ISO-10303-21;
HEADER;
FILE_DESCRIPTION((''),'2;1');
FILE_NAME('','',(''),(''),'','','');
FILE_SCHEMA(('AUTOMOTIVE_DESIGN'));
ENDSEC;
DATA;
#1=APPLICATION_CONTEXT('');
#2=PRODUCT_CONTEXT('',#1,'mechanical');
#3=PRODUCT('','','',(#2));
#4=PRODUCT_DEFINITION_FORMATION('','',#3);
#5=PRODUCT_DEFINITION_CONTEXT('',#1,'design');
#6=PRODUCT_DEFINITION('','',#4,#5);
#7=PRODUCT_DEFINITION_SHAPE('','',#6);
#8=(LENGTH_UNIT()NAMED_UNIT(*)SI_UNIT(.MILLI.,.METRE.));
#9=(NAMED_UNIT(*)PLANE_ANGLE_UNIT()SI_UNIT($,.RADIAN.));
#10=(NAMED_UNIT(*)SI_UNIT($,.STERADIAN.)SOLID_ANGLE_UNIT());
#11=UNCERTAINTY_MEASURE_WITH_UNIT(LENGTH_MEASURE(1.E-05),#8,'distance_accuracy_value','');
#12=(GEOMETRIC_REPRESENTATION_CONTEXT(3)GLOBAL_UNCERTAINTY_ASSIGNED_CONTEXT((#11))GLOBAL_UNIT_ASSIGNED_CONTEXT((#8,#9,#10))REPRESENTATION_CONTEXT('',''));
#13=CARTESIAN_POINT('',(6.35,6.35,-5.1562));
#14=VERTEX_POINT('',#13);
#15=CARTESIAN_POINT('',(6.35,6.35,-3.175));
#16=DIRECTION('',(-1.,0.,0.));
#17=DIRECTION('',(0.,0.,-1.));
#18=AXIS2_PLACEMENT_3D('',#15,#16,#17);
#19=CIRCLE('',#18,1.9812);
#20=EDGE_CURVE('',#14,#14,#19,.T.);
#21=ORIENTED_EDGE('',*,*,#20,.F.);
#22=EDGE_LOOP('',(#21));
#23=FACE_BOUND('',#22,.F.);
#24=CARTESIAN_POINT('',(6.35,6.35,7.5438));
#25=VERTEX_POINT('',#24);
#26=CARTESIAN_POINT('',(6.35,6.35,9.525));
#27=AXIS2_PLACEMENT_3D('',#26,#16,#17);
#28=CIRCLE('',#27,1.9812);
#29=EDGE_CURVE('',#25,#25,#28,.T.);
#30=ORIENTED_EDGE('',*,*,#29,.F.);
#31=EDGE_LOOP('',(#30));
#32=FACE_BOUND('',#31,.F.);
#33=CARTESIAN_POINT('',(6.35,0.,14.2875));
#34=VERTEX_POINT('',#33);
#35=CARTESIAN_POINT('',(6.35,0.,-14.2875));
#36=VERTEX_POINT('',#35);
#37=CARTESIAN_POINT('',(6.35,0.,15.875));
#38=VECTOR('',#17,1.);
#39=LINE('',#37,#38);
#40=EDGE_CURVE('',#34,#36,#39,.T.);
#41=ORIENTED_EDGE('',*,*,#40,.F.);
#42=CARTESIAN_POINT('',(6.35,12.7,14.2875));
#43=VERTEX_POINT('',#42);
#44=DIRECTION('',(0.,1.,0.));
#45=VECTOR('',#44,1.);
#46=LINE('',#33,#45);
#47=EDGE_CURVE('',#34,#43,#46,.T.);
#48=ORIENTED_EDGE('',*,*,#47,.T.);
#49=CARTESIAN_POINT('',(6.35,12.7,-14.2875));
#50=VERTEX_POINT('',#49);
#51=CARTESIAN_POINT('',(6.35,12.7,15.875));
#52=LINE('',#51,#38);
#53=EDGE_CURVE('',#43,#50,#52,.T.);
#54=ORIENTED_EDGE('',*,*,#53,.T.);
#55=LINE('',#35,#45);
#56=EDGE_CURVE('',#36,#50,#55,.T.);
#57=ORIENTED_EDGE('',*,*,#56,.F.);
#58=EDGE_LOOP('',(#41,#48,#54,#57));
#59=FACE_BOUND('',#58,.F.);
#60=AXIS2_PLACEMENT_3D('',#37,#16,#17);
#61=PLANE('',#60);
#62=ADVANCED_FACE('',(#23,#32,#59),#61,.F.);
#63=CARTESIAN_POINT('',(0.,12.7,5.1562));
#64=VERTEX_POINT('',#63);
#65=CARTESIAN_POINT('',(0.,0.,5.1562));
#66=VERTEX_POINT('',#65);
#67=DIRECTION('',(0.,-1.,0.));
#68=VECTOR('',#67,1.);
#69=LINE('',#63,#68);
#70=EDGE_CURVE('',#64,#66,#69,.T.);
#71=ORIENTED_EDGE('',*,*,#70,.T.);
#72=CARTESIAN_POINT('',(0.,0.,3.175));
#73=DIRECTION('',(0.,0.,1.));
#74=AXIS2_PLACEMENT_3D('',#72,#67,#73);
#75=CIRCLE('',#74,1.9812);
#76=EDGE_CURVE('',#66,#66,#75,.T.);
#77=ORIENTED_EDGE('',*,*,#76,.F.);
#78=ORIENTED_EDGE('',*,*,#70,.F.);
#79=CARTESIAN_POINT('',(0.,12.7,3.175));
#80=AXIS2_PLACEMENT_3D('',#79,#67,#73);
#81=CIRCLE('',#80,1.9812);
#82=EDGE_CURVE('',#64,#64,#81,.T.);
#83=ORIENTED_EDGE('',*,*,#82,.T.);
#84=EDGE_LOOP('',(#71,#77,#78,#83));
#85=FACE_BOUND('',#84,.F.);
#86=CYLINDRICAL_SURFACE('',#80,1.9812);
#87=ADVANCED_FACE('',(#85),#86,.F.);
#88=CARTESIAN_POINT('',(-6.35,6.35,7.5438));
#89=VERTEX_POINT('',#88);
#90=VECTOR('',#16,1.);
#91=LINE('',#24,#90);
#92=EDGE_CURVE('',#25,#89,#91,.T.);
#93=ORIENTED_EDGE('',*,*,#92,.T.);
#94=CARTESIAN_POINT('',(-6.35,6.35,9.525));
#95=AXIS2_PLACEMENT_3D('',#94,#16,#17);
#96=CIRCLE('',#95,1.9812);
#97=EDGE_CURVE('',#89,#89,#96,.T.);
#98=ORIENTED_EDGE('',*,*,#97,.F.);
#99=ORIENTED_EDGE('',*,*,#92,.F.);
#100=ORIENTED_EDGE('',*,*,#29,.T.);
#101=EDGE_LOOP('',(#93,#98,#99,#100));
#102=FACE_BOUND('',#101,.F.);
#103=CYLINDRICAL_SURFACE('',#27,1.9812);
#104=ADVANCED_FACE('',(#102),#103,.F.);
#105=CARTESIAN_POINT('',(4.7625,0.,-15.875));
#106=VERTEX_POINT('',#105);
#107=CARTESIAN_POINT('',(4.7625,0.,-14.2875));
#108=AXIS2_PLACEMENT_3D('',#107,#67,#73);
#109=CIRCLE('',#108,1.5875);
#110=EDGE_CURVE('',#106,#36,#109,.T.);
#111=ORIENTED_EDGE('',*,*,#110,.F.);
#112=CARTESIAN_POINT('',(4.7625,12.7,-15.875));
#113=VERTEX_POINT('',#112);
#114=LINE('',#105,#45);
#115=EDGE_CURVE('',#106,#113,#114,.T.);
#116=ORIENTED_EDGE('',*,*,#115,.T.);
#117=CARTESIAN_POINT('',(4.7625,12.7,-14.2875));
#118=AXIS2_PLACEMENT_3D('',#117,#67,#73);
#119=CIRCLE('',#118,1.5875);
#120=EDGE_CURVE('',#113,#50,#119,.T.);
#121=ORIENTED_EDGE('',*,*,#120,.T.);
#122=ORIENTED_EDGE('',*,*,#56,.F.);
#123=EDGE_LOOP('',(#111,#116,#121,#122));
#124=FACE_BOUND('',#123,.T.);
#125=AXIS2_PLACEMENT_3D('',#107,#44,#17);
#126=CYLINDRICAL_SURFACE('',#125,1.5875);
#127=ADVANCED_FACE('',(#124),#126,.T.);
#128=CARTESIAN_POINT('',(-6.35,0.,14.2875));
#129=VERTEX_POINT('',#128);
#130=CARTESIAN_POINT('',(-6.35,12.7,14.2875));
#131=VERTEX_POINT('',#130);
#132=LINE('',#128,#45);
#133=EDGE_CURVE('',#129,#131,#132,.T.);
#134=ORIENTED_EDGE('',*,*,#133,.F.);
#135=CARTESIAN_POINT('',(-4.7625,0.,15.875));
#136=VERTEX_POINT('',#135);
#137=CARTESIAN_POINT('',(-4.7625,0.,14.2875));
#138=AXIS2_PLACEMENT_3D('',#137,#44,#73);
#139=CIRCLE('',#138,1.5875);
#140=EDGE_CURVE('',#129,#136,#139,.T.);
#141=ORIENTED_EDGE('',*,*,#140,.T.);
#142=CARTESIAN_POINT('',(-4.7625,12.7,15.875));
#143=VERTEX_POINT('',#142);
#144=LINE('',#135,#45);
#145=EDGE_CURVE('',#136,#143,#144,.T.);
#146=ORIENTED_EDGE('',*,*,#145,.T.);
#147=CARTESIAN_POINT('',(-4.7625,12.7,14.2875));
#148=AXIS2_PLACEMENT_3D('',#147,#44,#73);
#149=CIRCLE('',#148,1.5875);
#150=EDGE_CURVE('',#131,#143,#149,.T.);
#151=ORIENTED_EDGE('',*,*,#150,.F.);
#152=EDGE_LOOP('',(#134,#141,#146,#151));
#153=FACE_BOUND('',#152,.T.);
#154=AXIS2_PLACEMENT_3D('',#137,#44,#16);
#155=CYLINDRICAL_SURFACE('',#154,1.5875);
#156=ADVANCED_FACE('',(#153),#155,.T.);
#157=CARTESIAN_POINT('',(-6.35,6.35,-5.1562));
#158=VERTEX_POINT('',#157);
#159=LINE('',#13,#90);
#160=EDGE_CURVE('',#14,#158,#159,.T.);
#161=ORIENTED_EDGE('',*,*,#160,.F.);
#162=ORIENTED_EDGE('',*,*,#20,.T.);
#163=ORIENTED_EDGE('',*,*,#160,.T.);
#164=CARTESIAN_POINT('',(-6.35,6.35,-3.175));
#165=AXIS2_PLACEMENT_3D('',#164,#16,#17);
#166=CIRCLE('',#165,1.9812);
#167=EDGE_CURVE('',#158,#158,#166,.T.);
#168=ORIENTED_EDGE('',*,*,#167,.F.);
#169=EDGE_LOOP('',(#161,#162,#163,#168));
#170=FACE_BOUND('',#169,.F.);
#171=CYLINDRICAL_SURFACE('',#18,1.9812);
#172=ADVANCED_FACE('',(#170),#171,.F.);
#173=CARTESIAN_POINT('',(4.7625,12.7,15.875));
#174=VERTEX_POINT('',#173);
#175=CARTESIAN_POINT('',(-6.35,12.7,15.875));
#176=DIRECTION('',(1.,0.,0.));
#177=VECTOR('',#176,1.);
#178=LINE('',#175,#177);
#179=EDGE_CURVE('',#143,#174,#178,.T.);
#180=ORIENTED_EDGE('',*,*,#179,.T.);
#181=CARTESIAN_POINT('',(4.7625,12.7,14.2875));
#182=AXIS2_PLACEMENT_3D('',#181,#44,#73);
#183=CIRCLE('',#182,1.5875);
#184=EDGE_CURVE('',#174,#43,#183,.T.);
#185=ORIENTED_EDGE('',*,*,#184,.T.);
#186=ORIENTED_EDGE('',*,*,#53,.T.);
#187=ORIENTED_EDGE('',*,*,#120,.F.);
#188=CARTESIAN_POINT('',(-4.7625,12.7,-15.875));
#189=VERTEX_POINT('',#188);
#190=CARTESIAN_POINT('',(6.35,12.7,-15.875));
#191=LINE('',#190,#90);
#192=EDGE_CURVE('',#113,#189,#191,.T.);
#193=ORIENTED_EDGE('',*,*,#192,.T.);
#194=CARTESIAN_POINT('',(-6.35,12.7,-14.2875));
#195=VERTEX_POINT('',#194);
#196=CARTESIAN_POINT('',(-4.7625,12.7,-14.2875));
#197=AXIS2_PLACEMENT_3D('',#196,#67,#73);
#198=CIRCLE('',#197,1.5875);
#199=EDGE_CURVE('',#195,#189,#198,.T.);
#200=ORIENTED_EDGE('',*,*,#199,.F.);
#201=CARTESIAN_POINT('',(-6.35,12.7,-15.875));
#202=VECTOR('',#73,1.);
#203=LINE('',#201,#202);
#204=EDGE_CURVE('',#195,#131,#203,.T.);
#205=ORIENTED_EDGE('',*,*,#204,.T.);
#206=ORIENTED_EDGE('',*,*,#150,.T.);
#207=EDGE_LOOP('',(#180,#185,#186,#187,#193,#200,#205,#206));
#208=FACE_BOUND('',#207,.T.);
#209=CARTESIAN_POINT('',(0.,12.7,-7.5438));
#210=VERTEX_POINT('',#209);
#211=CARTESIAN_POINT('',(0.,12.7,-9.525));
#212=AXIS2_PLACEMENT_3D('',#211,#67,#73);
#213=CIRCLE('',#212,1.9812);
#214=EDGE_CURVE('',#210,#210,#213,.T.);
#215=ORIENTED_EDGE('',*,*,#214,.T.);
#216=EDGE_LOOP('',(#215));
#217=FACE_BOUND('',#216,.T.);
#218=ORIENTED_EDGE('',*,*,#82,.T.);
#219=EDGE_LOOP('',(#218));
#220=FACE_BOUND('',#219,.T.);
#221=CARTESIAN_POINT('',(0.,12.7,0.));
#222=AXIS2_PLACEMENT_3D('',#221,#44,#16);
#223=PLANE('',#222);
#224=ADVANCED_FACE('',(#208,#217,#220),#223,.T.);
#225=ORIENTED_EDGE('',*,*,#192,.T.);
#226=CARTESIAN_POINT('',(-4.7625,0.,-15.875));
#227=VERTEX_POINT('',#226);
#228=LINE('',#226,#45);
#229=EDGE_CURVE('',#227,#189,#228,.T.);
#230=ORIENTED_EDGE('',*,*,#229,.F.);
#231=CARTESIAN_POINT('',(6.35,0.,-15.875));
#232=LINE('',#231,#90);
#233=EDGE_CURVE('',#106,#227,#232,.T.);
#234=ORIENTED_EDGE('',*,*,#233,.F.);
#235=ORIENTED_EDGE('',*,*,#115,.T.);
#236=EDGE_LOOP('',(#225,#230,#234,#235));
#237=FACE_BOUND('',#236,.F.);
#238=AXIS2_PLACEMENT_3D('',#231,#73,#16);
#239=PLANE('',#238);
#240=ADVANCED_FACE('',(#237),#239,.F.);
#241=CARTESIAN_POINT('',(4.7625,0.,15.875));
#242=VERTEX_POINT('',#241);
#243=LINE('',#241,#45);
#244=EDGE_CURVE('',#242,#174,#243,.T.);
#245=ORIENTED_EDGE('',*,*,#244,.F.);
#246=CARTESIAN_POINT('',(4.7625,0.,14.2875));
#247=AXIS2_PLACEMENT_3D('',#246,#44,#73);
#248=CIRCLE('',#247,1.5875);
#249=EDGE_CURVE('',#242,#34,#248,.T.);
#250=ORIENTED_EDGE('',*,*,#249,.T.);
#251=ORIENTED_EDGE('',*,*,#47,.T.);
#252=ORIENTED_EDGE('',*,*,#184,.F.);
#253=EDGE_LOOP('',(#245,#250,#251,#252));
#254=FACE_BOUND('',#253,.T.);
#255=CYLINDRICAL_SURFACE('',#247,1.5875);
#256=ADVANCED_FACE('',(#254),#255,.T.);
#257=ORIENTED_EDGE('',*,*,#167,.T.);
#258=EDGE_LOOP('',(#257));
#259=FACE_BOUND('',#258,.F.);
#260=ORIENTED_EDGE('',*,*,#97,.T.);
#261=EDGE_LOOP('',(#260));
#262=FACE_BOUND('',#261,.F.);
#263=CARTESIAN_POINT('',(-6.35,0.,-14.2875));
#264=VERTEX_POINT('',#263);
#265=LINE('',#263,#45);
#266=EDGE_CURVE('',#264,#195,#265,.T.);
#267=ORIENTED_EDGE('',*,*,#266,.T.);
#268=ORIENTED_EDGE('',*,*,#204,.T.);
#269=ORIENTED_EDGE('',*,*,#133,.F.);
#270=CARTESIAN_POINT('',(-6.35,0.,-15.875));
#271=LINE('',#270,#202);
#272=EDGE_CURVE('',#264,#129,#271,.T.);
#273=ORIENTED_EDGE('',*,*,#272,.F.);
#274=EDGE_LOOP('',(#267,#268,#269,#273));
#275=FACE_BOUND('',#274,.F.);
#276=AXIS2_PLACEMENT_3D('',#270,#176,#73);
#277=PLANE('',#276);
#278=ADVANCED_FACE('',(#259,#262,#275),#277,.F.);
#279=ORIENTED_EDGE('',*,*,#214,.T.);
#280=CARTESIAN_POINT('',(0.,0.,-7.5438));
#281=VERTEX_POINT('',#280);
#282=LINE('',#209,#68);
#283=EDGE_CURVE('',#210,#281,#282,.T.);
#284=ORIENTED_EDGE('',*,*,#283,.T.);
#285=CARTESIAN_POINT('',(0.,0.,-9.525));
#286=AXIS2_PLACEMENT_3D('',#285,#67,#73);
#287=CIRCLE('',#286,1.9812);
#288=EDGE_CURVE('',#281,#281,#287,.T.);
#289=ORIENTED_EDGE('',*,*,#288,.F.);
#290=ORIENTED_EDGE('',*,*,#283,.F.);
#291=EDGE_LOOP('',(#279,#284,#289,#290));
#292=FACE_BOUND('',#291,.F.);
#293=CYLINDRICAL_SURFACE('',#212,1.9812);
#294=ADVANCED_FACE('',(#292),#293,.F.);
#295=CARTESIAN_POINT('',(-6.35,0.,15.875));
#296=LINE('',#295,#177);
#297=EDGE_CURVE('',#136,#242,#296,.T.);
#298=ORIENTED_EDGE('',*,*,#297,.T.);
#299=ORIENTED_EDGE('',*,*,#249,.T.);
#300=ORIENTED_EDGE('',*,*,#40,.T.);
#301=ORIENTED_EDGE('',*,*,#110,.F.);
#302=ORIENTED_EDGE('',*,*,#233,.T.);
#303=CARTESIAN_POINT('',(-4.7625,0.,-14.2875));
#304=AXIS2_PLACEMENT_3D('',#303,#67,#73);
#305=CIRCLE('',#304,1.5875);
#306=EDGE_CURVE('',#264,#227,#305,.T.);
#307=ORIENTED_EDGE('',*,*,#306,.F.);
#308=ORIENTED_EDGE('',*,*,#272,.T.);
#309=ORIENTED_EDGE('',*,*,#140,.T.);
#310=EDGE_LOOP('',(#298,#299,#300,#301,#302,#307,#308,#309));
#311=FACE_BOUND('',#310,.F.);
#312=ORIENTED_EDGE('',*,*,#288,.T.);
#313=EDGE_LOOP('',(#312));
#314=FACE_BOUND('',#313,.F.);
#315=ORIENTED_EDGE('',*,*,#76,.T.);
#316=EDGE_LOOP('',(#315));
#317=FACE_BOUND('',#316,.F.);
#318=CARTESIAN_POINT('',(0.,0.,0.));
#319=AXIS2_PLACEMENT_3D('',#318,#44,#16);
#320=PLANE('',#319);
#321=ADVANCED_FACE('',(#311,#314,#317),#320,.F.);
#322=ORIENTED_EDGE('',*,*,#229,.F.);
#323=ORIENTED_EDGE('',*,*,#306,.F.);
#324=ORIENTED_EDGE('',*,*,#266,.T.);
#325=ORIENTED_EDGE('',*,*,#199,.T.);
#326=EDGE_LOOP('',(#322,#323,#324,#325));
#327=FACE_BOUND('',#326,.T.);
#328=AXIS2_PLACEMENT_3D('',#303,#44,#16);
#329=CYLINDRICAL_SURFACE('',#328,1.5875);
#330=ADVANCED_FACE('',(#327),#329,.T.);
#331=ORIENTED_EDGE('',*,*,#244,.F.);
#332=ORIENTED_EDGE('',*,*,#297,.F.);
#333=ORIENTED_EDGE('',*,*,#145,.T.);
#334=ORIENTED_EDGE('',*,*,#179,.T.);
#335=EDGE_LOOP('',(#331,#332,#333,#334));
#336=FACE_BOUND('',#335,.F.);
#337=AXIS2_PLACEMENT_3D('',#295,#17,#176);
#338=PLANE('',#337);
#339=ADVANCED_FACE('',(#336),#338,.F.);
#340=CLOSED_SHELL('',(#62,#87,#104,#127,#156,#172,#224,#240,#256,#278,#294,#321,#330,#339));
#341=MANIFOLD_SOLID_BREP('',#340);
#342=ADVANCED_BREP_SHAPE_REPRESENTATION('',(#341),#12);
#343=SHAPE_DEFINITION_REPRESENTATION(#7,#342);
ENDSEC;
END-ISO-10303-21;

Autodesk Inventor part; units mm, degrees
ref_plane "YZ Plane" through (0, 0, 0) normal (1, 0, 0) x (0, 1, 0)
ref_plane "XZ Plane" through (0, 0, 0) normal (0, 1, 0) x (-1, 0, 0)
ref_plane "XY Plane" through (0, 0, 0) normal (0, 0, 1) x (1, 0, 0)
sketch "Sketch1" plane through (0, 0, 0) normal (0, 1, 0) x (-1, 0, 0)
  line L0 (6.35, 15.875) -> (-6.35, 15.875)
  line L1 (-6.35, 15.875) -> (-6.35, -15.875)
  line L2 (-6.35, -15.875) -> (6.35, -15.875)
  line L3 (6.35, -15.875) -> (6.35, 15.875)
  line L4 (6.35, 15.875) -> (-6.35, -15.875) construction
  line L5 (-6.35, 15.875) -> (6.35, -15.875) construction
  point P0 (0, 0)
  dimension "d0" = 31.75
  dimension "d1" = 12.7
extrude "Plate1" add sketch "Sketch1" along normal blind 12.7
sketch "Sketch2" plane through (6.35, 0, 15.875) normal (1, 0, 0) x (0, 0, -1)
  line L0 (0, 0) -> (0, 12.7) construction
  point P0 (15.875, 0)
  point P1 (6.35, 6.35)
  point P2 (19.05, 6.35)
  point P3 (0, 6.35)
  dimension "d3" = 12.7
  dimension "d4" = 6.35
hole "Hole1" at (6.35, 6.35, 9.525) at (6.35, 6.35, -3.175) direction (-1, 0, 0) diameter 3.9624 end through all thread size "10-32 UNF" class "2B" standard "ANSI Unified Screw Threads"
sketch "Sketch3" plane through (0, 12.7, 0) normal (0, 1, 0) x (1, 0, 0)
  point P0 (0, 0)
  point P1 (0, -3.175)
  point P2 (0, 9.525)
  dimension "d12" = 12.7
  dimension "d13" = 3.175
hole "Hole2" at (0, 12.7, 3.175) at (0, 12.7, -9.525) direction (0, -1, 0) diameter 3.9624 end through all thread size "10-32 UNF" class "2B" standard "ANSI Unified Screw Threads"
fillet "Corner Round1" radius 1.5875 4 edges at (6.35, 6.35, 15.875) (-6.35, 6.35, 15.875) (-6.35, 6.35, -15.875) (6.35, 6.35, -15.875)
equation "\"d2\" = Thickness"
equation "\"BendRadius\" = Thickness"
equation "\"BendReliefWidth\" = Thickness"
equation "\"BendReliefDepth\" = 0.5 * Thickness"
equation "\"CornerReliefSize\" = 4 * Thickness"
equation "\"MinimumRemnant\" = 2 * Thickness"
equation "\"TransitionRadius\" = BendRadius"
equation "\"JacobiRadiusSize\" = BendRadius"
equation "\"GapSize\" = Thickness"
equation "\"Thickness\" = 12.7"
properties part number "PLATE,NUTBLOCK" material "Aluminum 6061"
